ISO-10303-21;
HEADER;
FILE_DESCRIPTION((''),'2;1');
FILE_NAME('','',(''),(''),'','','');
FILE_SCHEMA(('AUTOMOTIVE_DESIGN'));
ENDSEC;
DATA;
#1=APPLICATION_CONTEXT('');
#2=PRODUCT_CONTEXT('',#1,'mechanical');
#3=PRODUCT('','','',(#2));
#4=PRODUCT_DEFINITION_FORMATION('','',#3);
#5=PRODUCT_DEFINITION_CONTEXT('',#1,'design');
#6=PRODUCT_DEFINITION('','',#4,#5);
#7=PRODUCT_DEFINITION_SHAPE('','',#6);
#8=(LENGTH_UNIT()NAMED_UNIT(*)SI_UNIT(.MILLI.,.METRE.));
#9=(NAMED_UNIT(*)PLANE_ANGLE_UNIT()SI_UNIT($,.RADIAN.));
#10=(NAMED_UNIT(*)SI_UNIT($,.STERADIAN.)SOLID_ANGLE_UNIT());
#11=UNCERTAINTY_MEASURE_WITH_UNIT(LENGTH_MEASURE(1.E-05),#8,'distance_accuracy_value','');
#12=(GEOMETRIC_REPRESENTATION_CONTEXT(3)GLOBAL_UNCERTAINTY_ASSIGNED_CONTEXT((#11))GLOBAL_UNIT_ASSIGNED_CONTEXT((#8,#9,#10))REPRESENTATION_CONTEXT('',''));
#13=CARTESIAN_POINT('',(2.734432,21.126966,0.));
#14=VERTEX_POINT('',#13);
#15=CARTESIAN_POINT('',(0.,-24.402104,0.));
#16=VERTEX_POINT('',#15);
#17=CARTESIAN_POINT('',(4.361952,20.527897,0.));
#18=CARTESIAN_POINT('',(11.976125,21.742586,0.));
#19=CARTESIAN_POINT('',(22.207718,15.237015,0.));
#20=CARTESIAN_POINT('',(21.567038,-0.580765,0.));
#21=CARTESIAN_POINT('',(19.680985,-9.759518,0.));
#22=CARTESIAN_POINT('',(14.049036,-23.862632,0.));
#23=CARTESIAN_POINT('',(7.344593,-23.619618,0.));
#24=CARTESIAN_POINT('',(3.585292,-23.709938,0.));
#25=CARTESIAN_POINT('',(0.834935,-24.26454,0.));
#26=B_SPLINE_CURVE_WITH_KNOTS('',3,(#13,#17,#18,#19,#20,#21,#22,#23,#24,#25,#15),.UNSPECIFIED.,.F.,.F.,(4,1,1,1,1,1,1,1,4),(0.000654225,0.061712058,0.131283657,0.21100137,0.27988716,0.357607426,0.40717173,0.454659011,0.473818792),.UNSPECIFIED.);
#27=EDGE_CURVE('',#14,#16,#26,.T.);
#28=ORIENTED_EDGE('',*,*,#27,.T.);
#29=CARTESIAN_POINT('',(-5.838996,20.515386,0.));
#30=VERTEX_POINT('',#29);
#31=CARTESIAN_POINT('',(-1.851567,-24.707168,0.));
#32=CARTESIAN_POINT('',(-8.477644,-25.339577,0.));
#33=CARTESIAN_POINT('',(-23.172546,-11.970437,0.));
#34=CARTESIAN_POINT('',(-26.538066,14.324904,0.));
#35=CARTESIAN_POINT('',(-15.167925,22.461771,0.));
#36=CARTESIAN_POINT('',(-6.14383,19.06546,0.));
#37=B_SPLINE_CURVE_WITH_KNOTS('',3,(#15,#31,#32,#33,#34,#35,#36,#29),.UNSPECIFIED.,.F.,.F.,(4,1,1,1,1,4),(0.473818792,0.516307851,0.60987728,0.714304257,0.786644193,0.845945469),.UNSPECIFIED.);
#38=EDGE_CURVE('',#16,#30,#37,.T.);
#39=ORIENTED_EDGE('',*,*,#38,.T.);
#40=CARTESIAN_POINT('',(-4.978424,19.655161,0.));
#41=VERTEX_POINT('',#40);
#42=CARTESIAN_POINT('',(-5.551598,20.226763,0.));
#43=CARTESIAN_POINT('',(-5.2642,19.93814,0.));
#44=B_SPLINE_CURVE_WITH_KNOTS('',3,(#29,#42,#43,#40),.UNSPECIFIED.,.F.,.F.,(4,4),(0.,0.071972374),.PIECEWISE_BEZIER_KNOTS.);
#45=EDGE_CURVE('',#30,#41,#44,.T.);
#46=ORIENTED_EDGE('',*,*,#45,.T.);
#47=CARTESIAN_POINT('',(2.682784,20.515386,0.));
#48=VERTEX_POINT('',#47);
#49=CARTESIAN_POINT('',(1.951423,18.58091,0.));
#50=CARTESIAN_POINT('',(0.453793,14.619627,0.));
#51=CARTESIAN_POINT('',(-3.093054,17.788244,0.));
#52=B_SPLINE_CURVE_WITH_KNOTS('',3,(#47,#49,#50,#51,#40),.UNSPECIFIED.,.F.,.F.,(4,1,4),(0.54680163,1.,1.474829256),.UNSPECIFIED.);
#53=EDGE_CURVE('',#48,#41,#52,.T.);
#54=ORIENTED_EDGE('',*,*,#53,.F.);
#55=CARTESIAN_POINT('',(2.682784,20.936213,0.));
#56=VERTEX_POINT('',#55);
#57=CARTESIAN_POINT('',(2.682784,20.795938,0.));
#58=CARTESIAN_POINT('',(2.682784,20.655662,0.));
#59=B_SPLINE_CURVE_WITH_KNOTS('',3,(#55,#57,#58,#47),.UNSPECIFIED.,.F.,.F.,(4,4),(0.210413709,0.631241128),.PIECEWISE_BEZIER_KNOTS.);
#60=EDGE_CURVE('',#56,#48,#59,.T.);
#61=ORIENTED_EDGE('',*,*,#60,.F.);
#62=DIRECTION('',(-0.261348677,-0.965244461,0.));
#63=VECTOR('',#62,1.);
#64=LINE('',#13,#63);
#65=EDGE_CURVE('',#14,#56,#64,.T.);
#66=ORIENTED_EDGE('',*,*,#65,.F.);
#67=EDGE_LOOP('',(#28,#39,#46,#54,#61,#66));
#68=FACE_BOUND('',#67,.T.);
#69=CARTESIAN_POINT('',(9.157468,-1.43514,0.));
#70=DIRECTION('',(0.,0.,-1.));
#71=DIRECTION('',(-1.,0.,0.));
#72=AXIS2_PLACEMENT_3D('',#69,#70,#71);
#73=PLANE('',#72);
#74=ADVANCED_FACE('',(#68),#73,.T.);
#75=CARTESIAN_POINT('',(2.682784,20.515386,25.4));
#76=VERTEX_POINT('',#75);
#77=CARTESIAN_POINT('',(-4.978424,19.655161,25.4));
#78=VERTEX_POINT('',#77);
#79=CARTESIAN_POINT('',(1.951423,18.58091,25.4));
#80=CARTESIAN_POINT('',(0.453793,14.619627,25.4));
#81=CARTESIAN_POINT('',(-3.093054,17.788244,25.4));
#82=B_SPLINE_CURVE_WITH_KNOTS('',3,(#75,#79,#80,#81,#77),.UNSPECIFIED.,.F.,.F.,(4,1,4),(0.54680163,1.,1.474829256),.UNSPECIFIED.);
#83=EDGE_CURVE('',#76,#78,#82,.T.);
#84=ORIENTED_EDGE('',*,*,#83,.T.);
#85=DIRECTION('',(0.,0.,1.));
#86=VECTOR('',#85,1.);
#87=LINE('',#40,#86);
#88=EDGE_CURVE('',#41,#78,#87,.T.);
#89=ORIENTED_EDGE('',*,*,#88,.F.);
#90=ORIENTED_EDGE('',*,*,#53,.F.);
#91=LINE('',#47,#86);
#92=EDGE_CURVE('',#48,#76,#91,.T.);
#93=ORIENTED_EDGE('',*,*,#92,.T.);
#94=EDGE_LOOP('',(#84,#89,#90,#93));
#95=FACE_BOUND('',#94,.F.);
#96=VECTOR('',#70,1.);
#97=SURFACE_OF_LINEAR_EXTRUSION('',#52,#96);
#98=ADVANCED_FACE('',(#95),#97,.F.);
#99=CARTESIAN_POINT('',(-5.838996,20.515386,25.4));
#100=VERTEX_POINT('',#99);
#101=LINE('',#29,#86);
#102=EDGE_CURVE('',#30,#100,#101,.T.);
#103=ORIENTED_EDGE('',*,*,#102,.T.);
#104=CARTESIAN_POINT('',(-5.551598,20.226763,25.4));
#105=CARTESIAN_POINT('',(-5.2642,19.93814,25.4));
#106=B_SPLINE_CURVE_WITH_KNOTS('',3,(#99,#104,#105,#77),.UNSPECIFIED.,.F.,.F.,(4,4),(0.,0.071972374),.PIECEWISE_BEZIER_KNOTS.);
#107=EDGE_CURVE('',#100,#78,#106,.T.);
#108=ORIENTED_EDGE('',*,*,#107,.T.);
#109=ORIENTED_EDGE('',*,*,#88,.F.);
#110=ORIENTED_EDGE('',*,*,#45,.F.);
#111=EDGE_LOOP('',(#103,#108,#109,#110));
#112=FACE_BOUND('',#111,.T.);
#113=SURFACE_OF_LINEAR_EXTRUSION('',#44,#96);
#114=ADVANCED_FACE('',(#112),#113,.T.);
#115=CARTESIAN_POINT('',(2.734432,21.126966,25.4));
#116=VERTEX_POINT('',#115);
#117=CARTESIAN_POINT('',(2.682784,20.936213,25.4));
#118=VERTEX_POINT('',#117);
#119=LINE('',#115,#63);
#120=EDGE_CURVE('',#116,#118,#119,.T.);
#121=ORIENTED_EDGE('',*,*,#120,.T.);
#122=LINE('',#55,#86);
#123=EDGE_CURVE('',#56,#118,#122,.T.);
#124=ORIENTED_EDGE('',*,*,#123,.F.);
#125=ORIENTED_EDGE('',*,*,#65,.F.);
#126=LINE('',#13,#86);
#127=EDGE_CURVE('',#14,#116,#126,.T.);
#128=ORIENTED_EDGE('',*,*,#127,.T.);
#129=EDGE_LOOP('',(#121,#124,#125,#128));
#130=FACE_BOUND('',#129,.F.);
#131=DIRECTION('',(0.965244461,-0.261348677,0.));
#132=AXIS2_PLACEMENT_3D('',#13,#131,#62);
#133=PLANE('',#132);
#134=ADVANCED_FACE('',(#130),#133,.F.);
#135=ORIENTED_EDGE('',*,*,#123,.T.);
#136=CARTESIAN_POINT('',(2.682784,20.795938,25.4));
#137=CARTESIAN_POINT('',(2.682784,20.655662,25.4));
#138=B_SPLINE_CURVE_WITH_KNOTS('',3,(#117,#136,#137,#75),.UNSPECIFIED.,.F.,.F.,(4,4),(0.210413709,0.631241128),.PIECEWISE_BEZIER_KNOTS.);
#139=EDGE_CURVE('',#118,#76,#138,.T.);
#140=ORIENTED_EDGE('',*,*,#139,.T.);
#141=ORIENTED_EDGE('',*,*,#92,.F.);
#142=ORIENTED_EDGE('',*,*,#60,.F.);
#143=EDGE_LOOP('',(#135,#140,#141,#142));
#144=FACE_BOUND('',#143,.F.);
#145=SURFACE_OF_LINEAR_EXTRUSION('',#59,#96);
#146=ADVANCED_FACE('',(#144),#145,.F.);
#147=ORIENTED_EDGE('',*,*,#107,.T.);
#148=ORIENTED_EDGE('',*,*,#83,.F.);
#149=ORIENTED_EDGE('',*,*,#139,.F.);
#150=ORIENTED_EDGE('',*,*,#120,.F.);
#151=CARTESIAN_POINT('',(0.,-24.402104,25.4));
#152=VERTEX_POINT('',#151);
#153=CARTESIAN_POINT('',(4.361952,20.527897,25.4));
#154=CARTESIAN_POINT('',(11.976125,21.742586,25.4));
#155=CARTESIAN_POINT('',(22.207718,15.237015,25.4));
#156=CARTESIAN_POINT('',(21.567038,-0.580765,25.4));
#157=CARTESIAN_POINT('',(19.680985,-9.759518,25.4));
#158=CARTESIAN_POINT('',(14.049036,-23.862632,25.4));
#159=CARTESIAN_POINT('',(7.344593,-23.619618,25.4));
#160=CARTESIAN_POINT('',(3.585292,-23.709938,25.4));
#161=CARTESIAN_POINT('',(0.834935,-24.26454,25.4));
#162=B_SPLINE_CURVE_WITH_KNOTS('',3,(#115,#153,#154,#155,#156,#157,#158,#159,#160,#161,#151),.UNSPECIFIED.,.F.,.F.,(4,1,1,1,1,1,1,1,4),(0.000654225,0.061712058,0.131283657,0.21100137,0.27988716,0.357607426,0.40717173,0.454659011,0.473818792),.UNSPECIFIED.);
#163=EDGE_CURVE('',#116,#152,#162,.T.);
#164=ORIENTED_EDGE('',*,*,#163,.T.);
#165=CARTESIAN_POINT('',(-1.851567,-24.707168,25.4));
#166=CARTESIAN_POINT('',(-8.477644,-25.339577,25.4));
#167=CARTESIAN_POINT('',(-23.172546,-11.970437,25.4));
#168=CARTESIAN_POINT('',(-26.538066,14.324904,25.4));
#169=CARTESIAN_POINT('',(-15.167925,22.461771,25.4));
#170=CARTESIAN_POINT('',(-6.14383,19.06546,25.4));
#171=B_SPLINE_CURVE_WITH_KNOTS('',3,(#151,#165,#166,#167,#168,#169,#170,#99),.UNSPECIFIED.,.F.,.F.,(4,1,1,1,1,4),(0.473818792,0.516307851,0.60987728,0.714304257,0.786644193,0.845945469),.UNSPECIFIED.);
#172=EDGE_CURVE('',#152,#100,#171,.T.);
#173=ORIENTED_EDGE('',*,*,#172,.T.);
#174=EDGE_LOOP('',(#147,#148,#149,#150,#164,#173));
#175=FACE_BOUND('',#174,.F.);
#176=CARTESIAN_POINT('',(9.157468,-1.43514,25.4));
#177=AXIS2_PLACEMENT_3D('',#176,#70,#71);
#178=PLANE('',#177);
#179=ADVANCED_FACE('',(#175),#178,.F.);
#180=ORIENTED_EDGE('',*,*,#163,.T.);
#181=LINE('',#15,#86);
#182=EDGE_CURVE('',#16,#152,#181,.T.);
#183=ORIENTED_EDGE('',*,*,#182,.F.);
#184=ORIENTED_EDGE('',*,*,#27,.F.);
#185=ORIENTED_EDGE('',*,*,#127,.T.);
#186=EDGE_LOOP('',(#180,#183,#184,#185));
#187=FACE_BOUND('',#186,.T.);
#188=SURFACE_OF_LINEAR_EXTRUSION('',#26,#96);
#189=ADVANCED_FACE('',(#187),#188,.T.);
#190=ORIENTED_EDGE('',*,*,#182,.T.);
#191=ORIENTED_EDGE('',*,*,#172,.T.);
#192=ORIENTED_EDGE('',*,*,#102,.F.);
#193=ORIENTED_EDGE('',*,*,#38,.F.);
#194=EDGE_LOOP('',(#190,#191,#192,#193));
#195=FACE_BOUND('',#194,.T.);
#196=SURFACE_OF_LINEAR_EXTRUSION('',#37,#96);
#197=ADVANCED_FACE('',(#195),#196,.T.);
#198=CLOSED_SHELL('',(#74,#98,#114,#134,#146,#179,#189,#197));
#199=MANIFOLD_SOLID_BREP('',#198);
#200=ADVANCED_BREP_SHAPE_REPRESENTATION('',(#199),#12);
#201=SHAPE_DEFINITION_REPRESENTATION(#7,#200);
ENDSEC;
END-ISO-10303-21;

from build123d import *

# Parameters (mm, degrees)
F1_DEPTH = 25.4


with BuildPart() as f1:
    # F0 (on Top) → F1 (new body)
    with BuildSketch(Plane.XY):
        with BuildLine():
            add(Edge.make_bspline(
                [(0, 16.4123084396), (1.2200616504, 16.6464344415), (1.9514227621, 18.5809102283), (2.6827838738, 20.5153860152)],
                knots=[0.5468016302, 0.5468016302, 0.5468016302, 0.5468016302, 1, 1, 1, 1], degree=3))
            Line((0, 16.4123084396), (0, -24.4021035616))
            add(Edge.make_bspline(
                [(2.7344317625, 21.1269656467), (4.3619516884, 20.5278971438), (11.9761249056, 21.7425858169), (22.207718454, 15.2370149441), (21.5670381154, -0.5807645638), (19.6809851156, -9.7595184086), (14.0490357914, -23.8626322199), (7.3445930023, -23.6196180627), (3.5852921603, -23.7099375503), (0.8349352795, -24.2645396907), (0, -24.4021035616)],
                knots=[0.0006542248, 0.0006542248, 0.0006542248, 0.0006542248, 0.0617120582, 0.131283657, 0.2110013704, 0.2798871598, 0.3576074262, 0.4071717299, 0.4546590114, 0.4738187916, 0.4738187916, 0.4738187916, 0.4738187916], degree=3))
            Line((2.7344317625, 21.1269656467), (2.6827838738, 20.9362134337))
            add(Edge.make_bspline(
                [(2.6827838738, 20.9362134337), (2.6827838738, 20.7959376276), (2.6827838738, 20.6556618214), (2.6827838738, 20.5153860152)],
                knots=[0.2104137093, 0.2104137093, 0.2104137093, 0.2104137093, 0.6312411278, 0.6312411278, 0.6312411278, 0.6312411278], degree=3))
        make_face()
        with BuildLine():
            Line((0, -24.4021035616), (0, 16.4123084396))
            add(Edge.make_bspline(
                [(-4.9784243836, 19.6551613061), (-3.0930535372, 17.7882437458), (-1.278294462, 16.1670077439), (0, 16.4123084396)],
                knots=[0.0719723737, 0.0719723737, 0.0719723737, 0.0719723737, 0.5468016302, 0.5468016302, 0.5468016302, 0.5468016302], degree=3))
            add(Edge.make_bspline(
                [(-5.8389957994, 20.5153860152), (-5.5515978909, 20.2267629291), (-5.2641999823, 19.9381398429), (-4.9784243836, 19.6551613061)],
                knots=[0, 0, 0, 0, 0.0719723737, 0.0719723737, 0.0719723737, 0.0719723737], degree=3))
            add(Edge.make_bspline(
                [(0, -24.4021035616), (-1.8515668673, -24.7071675729), (-8.4776442362, -25.3395773837), (-23.1725456339, -11.9704367404), (-26.5380656051, 14.3249040578), (-15.1679246871, 22.4617705994), (-6.143830471, 19.0654599224), (-5.8389957994, 20.5153860152)],
                knots=[0.4738187916, 0.4738187916, 0.4738187916, 0.4738187916, 0.5163078506, 0.60987728, 0.7143042567, 0.7866441933, 0.8459454691, 0.8459454691, 0.8459454691, 0.8459454691], degree=3))
        make_face()
    extrude(amount=F1_DEPTH)


solid = f1.part
